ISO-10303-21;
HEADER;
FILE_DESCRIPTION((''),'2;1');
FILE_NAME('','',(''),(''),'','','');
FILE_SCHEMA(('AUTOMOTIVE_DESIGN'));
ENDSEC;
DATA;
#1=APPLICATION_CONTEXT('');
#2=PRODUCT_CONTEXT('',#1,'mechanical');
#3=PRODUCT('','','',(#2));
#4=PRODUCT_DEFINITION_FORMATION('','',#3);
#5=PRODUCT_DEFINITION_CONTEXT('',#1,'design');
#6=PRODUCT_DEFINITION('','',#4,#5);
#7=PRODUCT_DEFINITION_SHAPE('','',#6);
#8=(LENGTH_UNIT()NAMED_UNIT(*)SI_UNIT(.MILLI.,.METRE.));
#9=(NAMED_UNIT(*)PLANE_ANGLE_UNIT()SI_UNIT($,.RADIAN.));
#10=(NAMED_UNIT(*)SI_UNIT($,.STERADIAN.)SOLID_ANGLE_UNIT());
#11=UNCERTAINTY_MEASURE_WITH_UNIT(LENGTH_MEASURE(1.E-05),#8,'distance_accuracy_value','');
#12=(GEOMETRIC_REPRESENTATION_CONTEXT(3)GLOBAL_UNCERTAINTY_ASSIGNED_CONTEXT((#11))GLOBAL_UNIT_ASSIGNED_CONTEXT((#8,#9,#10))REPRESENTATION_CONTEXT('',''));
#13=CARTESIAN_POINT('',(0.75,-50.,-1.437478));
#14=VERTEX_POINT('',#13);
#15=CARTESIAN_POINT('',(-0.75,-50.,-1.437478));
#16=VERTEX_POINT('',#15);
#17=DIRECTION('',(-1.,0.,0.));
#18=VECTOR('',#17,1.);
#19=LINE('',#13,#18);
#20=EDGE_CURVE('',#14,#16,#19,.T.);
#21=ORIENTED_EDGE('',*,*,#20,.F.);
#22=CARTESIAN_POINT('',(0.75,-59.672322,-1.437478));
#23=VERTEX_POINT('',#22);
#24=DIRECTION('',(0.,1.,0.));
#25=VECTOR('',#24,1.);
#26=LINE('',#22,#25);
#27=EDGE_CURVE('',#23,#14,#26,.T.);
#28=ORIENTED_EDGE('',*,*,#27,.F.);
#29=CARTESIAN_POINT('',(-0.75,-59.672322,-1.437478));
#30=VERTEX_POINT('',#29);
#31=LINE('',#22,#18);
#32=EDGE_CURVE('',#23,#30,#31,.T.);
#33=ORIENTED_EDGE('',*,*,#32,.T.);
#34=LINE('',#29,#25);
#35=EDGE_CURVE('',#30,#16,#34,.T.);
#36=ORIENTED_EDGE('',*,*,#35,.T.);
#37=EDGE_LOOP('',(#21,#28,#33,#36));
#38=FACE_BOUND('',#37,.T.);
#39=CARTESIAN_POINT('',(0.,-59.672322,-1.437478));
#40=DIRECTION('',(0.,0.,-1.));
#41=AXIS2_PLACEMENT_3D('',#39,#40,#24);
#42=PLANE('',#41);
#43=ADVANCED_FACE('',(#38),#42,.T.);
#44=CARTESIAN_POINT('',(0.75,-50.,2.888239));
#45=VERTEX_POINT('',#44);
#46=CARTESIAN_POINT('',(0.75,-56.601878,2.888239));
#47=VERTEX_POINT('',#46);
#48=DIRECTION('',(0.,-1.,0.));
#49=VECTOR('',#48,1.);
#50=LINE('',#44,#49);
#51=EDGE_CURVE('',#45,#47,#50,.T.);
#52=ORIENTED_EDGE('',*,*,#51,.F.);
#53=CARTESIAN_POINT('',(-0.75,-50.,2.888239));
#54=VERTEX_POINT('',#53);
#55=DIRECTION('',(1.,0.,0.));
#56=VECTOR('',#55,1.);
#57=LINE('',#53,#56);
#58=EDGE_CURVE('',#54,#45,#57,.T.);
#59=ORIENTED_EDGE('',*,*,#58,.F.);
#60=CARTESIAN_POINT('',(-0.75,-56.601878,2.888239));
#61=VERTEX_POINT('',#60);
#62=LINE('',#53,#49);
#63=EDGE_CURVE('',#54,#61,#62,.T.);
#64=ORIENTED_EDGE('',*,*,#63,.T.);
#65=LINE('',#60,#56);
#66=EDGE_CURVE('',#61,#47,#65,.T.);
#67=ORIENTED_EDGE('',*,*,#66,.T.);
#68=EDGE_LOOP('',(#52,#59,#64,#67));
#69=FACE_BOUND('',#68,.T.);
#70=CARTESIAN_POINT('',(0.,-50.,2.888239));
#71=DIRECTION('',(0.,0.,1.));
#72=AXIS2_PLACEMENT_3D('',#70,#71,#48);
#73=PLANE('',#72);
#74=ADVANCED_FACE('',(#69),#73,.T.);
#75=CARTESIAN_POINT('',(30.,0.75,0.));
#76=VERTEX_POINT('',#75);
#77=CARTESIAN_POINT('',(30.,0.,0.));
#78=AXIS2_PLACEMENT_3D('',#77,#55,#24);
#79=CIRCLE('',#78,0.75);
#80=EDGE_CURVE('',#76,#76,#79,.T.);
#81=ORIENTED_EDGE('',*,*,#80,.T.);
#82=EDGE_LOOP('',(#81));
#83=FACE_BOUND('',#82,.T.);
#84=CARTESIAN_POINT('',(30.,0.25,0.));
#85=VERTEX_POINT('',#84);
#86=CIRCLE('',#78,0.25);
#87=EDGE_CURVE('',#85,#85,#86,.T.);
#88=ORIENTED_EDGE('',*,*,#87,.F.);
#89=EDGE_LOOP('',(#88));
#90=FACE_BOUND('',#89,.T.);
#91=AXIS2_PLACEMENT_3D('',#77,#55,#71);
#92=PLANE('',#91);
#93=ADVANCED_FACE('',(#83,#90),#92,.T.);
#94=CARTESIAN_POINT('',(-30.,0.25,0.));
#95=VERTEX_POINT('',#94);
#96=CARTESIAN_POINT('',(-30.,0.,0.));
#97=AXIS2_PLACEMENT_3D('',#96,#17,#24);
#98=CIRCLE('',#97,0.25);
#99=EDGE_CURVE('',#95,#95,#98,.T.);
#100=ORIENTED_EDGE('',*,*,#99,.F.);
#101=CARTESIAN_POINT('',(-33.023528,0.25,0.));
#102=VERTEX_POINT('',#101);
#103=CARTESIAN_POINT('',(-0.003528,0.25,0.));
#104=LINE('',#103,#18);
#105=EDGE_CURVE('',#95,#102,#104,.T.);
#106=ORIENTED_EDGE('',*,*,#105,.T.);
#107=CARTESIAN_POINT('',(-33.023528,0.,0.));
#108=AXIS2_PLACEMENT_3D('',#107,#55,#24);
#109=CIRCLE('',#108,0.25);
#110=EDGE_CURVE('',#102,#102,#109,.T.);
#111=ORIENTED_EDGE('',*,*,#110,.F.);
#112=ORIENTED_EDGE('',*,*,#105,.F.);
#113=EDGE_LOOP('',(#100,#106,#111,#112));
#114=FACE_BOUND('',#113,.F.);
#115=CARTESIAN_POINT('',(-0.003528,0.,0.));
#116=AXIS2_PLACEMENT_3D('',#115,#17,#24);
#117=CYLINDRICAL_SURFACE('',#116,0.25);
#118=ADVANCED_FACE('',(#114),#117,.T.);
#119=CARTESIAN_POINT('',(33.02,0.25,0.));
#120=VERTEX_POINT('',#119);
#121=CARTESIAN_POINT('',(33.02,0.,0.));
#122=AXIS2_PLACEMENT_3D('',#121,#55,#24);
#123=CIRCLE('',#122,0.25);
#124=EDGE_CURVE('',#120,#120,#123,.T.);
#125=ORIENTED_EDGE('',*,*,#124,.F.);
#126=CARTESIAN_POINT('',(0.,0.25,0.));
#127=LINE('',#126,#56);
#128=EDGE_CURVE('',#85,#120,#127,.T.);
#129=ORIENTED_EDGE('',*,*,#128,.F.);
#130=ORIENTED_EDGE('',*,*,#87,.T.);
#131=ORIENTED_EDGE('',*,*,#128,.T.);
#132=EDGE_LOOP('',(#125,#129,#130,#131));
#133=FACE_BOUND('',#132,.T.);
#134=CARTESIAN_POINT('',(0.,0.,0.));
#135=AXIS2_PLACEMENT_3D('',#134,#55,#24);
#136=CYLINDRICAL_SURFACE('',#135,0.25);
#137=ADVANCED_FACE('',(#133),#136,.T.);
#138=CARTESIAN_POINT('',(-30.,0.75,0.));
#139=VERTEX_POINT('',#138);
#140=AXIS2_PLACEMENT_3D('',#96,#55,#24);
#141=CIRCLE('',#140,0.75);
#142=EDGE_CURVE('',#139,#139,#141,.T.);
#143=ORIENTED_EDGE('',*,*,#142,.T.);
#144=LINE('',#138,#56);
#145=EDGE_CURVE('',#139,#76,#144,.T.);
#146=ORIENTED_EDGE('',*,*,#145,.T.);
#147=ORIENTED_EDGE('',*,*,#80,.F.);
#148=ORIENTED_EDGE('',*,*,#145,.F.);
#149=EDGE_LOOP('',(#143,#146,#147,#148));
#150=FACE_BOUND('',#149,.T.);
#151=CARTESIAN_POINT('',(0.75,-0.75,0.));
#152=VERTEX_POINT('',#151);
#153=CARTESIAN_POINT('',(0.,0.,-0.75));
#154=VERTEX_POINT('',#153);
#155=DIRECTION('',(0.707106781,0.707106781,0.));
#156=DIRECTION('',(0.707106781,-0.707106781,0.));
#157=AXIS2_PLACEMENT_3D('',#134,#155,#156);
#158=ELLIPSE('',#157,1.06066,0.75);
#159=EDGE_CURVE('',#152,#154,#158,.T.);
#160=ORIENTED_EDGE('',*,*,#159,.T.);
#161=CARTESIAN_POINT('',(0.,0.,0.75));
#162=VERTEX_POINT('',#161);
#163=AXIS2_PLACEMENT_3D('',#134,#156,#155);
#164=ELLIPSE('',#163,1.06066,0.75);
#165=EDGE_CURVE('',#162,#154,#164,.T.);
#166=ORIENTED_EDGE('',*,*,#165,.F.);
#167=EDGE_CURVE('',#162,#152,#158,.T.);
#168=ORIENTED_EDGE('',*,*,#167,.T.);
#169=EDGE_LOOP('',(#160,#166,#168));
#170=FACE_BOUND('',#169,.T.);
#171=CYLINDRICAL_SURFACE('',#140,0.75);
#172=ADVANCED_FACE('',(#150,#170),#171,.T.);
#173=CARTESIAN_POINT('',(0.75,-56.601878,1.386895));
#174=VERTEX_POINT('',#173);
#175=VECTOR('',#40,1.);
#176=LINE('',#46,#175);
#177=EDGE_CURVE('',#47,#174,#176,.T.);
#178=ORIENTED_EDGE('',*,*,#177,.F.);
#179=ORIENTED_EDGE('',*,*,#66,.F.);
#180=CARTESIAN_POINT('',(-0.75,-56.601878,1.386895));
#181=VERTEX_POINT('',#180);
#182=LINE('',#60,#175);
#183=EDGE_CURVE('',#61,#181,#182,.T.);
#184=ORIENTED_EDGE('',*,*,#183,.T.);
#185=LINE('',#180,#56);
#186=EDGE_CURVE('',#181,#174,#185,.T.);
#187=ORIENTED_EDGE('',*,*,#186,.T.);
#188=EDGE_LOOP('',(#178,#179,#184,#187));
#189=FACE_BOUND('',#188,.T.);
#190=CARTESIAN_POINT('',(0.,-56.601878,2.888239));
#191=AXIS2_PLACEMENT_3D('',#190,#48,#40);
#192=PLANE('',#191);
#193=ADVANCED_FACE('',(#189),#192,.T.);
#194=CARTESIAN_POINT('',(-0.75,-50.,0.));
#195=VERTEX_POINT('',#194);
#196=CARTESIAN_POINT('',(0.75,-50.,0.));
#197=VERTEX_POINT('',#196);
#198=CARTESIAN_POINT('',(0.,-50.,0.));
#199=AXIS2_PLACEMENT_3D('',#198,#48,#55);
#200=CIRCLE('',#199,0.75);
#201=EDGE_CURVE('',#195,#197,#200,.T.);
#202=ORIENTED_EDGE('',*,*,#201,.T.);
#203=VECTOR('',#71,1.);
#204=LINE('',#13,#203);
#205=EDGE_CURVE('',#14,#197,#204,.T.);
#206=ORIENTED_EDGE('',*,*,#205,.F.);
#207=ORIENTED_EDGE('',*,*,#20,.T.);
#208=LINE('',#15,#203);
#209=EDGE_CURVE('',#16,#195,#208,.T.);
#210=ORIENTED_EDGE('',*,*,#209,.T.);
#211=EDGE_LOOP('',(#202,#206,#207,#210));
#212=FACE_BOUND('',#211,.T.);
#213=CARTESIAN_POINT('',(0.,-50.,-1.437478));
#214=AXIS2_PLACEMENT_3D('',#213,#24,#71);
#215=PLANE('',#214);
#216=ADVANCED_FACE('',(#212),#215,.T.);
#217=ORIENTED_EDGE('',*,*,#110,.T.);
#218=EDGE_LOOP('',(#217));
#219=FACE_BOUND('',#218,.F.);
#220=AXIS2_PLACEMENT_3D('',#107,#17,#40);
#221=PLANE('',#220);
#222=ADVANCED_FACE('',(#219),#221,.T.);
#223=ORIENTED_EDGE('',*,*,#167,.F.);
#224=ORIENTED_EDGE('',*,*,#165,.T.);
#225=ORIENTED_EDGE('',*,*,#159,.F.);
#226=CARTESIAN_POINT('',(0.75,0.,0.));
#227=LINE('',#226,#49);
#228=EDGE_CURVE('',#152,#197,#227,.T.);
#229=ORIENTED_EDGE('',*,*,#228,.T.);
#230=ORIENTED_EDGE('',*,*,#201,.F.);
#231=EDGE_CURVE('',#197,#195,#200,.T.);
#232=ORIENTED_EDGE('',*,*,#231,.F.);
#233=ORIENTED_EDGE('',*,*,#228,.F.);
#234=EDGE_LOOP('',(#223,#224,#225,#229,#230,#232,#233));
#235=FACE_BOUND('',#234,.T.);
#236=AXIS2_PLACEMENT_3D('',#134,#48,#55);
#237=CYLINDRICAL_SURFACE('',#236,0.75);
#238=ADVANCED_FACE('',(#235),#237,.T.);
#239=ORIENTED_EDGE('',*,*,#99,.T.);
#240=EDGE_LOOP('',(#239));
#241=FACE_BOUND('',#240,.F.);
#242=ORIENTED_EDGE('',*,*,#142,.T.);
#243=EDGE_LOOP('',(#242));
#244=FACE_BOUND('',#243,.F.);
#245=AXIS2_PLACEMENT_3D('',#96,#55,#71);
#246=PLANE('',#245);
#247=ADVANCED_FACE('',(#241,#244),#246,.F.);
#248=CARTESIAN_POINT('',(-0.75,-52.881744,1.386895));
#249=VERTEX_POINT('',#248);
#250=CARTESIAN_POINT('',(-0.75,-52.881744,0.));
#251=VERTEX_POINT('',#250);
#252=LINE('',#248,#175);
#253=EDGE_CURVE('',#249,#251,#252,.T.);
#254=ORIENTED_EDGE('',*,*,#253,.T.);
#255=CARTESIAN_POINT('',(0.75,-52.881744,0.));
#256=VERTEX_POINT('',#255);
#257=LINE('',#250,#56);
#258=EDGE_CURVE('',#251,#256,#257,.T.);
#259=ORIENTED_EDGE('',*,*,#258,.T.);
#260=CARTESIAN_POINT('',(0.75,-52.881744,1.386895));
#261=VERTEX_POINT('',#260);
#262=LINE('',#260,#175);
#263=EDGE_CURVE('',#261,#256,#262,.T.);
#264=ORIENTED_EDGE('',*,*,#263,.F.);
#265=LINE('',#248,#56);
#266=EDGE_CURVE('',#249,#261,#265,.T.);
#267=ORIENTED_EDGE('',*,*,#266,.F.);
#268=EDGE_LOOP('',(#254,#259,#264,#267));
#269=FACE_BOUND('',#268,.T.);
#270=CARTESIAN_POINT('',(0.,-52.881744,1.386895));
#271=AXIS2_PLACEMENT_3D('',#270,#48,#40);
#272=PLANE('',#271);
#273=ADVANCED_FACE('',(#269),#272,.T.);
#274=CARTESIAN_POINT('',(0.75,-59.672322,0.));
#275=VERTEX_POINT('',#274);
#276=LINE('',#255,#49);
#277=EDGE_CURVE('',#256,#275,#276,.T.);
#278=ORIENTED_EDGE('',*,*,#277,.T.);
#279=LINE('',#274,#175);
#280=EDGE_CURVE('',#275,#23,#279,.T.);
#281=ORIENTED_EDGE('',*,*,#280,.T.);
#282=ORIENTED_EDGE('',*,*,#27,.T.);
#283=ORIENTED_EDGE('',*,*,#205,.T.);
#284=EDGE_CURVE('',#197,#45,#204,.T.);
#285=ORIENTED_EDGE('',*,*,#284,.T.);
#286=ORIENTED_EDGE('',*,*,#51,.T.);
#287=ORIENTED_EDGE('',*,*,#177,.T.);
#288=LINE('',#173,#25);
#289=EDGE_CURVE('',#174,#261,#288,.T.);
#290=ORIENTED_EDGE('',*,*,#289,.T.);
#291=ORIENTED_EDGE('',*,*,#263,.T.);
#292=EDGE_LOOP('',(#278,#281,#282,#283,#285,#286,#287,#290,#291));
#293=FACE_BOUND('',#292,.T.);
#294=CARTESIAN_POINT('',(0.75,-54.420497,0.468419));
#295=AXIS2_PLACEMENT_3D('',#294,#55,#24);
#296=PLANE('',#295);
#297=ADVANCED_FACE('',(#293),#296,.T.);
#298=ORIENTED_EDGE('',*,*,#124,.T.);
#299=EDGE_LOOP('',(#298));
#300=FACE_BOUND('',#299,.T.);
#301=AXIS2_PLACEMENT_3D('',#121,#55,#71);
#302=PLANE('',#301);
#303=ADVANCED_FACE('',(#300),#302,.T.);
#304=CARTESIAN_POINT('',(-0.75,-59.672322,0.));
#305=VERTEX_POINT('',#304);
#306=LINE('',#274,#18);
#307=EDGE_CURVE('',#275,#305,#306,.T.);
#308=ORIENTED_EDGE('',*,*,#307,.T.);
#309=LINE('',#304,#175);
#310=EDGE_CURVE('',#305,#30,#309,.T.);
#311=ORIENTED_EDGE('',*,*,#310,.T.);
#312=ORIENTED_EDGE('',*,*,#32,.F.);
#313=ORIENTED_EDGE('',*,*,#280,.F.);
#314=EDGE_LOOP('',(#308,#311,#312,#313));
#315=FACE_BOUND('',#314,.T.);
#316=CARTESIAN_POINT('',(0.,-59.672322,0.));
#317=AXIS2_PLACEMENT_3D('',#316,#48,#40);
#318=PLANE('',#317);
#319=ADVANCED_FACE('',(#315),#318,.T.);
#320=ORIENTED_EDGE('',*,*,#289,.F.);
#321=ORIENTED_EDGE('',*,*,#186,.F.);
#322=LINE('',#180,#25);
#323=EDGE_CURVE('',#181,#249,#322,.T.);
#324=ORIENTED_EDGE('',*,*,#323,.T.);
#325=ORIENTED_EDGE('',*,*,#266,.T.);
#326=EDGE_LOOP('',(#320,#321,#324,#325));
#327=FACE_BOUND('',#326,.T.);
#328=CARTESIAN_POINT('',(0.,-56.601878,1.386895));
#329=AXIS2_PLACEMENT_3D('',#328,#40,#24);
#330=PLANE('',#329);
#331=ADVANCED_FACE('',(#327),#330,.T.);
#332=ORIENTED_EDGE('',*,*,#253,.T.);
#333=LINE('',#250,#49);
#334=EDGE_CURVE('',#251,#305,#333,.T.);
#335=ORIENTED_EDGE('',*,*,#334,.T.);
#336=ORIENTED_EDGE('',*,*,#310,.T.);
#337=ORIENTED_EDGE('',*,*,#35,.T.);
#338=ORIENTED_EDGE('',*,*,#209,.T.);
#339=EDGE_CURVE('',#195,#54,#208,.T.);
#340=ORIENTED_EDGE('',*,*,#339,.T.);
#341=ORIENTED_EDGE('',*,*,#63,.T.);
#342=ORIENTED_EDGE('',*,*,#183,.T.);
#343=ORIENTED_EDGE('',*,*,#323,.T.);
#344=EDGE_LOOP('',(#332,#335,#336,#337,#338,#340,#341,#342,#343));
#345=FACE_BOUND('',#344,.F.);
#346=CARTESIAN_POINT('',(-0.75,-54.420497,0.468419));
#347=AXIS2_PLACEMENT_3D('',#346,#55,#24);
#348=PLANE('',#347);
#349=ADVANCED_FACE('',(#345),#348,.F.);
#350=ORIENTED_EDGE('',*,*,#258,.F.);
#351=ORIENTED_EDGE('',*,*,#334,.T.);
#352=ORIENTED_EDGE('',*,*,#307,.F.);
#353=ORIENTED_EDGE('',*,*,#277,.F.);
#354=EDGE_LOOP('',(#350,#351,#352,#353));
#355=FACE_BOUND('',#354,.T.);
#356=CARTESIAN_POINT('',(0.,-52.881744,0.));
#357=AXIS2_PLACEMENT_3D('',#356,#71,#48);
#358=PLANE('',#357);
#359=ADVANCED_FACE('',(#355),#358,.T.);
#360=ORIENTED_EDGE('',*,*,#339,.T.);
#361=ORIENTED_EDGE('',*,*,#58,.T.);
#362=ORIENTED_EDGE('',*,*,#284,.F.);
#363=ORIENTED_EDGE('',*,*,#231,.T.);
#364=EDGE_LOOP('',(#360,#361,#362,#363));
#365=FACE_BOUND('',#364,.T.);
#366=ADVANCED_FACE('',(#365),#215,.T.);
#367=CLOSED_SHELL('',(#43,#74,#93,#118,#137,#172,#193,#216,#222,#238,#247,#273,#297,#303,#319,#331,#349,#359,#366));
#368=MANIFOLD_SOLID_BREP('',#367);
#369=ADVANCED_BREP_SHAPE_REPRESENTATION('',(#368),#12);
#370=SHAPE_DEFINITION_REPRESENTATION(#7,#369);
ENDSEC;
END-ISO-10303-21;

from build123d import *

# Parameters (mm, degrees)
F2_R      = 0.75
F10_R     = 0.25
F15_R     = 0.75
F19_DEPTH = 0.75


# Not quite as in the source:
# - a feature of the source that left no trace in its solid (it failed there, or was rolled back) is left out
# - a pattern or mirror of a feature is missing from the dataset's text; its kind, count and spacing are read off the source's solid


with BuildPart() as f3:
    # F3: sweep along a path in F0
    with BuildLine(Plane.XZ) as f3_path:
        Line((-30, 0), (0, 0))
        Line((0, 0), (30, 0))
    # F2 (on plane+point) → F3 (sweep)
    with BuildSketch(Plane.YZ.offset(-30)):
        Circle(F2_R)
    sweep(path=f3_path.line)

    # F11: sweep along a path in F8
    with BuildLine(Plane.XZ) as f11_path:
        Line((0, 0), (33.02, 0))
    # F10 (on plane+point) → F11 (sweep)
    with BuildSketch(Plane.YZ.offset(33.02)):
        Circle(F10_R)
    f11 = sweep(path=f11_path.line)

    # F11_copies: F11 across plane
    add(f11.mirror(Plane(origin=(-0.001764, 0, 0), x_dir=(0, 0, -1), z_dir=(-1, 0, 0))))

    # F16: sweep along a path in F13
    with BuildLine(Plane.YZ) as f16_path:
        Line((0, 0), (-50, 0))
    # F15 (on plane+point) → F16 (sweep)
    with BuildSketch(Plane.XZ.offset(50)):
        Circle(F15_R)
    sweep(path=f16_path.line)

    # F18 (on plane+point) → F19 (join, symmetric)
    with BuildSketch(Plane.YZ):
        Polygon((-50, -1.4374784192), (-50, 0), (-50, 2.8882389888), (-56.6018782556, 2.8882389888), (-56.6018782556, 1.3868947281), (-52.8817437589, 1.3868947281), (-52.8817437589, 0), (-59.6723221242, 0), (-59.6723221242, -1.4374784192), align=None)
    extrude(amount=F19_DEPTH, both=True)


solid = f3.part
